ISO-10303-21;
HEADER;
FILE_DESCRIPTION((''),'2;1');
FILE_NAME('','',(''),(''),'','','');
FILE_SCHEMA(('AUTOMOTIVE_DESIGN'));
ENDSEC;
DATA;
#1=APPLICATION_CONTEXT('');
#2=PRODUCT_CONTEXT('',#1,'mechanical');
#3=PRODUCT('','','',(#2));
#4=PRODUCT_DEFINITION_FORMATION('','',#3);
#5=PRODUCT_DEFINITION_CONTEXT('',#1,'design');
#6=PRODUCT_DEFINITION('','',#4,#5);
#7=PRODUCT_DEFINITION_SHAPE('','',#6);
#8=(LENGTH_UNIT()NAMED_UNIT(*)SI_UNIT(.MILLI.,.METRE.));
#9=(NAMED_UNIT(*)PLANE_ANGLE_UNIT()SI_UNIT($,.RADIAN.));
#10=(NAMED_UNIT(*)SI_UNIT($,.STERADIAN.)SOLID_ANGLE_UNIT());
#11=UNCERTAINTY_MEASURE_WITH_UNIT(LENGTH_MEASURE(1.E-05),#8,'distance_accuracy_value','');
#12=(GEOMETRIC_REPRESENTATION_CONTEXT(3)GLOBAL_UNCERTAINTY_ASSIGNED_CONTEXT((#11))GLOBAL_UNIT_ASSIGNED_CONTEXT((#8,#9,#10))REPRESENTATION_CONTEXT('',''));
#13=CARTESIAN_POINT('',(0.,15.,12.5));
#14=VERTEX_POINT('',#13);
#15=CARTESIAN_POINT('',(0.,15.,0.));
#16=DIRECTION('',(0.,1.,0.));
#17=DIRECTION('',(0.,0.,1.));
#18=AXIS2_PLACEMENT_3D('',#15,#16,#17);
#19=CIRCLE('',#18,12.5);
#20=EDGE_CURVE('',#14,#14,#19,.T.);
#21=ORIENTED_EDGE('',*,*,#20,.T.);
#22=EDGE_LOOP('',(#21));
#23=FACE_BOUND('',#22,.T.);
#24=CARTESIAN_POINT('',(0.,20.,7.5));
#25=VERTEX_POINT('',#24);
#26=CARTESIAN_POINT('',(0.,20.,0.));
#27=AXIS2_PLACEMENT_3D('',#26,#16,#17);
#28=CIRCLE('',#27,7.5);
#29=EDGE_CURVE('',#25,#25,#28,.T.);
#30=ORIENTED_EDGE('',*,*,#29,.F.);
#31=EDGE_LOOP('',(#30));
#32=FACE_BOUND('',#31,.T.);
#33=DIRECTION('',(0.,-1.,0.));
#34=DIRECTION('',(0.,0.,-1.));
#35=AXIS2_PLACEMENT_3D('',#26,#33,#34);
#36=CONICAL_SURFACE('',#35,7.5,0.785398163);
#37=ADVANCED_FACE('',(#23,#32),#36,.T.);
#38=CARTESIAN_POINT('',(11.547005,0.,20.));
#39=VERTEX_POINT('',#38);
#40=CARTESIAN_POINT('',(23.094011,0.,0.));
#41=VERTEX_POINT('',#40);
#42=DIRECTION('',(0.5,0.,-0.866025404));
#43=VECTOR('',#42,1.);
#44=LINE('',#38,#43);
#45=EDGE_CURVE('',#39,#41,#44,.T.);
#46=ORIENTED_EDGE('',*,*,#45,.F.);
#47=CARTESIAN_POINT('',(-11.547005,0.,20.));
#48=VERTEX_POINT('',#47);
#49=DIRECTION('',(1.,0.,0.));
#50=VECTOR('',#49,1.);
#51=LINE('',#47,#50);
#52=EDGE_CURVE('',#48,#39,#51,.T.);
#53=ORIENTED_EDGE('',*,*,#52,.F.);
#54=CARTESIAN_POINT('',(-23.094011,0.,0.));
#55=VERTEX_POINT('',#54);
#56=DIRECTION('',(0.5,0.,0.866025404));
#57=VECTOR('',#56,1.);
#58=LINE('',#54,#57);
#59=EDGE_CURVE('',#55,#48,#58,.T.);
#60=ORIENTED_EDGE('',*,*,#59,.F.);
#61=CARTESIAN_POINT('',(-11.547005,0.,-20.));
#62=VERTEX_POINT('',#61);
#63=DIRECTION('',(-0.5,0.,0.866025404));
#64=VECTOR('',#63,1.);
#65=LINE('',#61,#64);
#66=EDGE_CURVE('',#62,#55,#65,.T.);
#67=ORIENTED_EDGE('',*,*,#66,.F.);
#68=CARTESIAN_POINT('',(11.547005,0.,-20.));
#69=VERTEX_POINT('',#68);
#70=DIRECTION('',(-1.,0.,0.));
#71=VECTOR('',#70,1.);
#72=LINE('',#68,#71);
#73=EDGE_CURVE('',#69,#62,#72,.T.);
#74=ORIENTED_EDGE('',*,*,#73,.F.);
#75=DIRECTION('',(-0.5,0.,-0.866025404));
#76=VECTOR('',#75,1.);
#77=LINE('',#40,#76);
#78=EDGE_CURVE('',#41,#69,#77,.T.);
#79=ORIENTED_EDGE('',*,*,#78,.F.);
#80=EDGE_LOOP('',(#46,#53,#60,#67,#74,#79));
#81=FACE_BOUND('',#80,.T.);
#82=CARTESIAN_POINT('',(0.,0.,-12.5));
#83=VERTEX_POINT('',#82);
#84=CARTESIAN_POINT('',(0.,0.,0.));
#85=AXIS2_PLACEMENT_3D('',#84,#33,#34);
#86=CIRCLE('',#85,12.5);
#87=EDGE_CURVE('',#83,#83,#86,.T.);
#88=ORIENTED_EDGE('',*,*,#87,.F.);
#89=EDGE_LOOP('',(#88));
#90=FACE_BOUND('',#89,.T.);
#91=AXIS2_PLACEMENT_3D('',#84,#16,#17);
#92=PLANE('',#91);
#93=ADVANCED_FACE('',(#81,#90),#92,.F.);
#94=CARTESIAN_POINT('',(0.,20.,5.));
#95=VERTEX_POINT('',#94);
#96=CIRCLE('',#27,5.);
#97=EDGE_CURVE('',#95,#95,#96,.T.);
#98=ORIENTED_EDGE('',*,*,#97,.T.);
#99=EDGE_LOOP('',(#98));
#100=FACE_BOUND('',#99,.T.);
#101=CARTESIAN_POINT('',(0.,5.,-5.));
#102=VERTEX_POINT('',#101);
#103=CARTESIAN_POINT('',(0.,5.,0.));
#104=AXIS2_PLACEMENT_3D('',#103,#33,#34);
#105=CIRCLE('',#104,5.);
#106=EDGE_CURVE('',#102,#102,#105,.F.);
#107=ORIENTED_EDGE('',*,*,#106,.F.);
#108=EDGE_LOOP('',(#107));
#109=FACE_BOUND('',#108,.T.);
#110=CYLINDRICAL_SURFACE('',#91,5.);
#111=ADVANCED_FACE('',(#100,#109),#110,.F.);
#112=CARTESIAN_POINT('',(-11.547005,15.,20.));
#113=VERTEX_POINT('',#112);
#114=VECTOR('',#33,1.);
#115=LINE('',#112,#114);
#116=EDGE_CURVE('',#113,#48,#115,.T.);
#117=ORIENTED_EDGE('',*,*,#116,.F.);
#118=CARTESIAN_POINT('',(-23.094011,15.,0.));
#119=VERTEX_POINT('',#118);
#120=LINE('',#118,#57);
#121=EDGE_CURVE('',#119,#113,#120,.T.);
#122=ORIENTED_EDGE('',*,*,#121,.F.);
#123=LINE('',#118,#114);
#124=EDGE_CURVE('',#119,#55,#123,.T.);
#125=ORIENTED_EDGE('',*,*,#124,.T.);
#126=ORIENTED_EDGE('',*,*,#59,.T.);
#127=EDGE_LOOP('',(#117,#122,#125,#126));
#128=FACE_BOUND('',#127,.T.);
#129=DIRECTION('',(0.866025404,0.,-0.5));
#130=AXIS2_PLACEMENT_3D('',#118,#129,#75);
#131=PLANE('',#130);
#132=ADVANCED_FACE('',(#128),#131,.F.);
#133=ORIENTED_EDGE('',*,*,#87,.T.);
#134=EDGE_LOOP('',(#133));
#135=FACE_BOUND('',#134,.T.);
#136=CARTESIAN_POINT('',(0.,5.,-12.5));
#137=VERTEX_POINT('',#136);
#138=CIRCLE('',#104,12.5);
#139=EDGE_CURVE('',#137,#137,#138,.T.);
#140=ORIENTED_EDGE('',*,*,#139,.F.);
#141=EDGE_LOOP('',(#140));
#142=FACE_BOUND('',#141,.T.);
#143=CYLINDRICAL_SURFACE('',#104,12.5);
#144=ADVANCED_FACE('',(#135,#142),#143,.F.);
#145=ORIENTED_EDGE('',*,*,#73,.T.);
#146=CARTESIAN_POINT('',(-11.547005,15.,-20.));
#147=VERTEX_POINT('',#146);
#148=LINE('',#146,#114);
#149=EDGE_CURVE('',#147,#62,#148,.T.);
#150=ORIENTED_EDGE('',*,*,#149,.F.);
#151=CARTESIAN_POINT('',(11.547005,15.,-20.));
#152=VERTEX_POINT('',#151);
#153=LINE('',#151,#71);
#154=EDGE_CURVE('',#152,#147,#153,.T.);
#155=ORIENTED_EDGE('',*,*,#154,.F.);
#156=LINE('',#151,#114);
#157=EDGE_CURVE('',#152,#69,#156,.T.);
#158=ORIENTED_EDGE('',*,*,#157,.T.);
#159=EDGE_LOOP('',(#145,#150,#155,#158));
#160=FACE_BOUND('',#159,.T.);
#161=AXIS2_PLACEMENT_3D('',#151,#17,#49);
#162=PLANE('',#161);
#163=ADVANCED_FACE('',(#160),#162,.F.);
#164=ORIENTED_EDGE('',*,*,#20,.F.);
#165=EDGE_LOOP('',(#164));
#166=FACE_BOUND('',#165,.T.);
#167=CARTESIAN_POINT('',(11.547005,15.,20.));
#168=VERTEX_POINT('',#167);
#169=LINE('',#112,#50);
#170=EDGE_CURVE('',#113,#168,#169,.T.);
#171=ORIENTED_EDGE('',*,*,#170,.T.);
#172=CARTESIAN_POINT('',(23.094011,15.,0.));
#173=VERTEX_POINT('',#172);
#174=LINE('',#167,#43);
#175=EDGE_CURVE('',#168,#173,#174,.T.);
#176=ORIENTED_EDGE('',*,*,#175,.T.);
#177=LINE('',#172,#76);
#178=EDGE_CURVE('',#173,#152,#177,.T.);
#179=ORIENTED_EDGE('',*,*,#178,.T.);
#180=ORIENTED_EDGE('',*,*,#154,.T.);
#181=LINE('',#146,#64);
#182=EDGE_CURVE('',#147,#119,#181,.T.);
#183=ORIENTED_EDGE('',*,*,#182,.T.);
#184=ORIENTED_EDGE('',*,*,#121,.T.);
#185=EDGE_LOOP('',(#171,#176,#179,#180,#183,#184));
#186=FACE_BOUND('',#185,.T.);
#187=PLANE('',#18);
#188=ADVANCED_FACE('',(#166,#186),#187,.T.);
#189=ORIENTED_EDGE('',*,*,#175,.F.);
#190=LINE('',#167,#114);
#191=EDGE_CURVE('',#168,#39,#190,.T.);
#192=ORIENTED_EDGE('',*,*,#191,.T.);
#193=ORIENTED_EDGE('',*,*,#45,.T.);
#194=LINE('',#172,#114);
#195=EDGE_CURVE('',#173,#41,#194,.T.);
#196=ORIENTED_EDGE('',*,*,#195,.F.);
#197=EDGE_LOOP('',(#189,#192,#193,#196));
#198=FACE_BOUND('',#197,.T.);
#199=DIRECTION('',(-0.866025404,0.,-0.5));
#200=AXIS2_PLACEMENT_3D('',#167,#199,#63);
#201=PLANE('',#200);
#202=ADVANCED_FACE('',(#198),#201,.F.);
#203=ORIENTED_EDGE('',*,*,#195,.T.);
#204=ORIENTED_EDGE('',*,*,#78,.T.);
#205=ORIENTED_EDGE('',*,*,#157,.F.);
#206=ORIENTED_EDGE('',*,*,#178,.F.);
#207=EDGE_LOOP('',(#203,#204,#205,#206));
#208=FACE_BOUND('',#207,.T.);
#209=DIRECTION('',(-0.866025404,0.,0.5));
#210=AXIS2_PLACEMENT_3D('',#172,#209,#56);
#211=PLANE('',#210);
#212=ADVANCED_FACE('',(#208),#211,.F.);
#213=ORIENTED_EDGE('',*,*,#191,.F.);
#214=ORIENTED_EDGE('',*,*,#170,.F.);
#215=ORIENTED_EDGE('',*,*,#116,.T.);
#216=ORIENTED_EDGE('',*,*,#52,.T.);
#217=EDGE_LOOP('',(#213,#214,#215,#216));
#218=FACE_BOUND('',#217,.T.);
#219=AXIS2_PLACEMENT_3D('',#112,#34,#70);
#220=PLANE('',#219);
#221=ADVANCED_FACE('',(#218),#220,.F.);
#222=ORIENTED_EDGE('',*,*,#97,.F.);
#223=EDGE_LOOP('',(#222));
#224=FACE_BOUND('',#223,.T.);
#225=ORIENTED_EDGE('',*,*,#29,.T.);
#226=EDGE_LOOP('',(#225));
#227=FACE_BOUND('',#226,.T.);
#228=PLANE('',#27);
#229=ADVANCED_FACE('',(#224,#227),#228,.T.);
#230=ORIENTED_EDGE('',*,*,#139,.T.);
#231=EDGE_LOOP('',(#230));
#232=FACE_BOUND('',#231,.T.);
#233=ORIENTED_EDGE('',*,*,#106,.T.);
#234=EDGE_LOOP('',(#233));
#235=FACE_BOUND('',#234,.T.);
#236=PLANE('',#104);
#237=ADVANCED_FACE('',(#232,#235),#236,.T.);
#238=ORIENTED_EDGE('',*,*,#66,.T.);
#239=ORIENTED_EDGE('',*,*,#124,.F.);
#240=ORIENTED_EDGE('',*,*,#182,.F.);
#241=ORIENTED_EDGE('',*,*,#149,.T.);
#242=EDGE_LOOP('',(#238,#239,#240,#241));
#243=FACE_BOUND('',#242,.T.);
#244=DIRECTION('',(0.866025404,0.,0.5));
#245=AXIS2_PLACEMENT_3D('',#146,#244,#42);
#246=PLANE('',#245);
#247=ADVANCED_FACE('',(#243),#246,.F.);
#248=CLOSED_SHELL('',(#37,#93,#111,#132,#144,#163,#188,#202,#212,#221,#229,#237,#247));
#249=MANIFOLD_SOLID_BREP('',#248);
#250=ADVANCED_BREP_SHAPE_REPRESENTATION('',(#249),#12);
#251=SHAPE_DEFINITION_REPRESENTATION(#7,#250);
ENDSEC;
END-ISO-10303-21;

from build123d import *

# Parameters (mm, degrees)
BOSS_EXTRUDE1_DEPTH = 15
SKETCH2_R           = 12.5
BOSS_EXTRUDE2_DEPTH = 5
SKETCH3_R           = 5
CUT_EXTRUDE1_DEPTH  = 37.514837167
CHAMFER1_SIZE       = 5
SKETCH4_R           = 12.5
CUT_EXTRUDE2_DEPTH  = 5


with BuildPart() as part:
    # Sketch1 → Boss-Extrude1 (new body)
    with BuildSketch(Plane(origin=(0, 0, 0), x_dir=(1, 0, 0), z_dir=(0, 1, 0))):
        Polygon((11.547005384, 20), (-11.547005384, 20), (-23.094010768, 0), (-11.547005384, -20), (11.547005384, -20), (23.094010768, 0), align=None)
    extrude(amount=BOSS_EXTRUDE1_DEPTH)

    # Sketch2 → Boss-Extrude2 (add)
    with BuildSketch(Plane(origin=(0, 15, 0), x_dir=(1, 0, 0), z_dir=(0, 1, 0))):
        with Locations(Location((0, 0, 0), (0, 0, 270))):
            Circle(SKETCH2_R)
    extrude(amount=BOSS_EXTRUDE2_DEPTH)

    # Sketch3 → Cut-Extrude1 (cut, through all)
    with BuildSketch(Plane(origin=(0, 20, 0), x_dir=(1, 0, 0), z_dir=(0, 1, 0))):
        with Locations(Location((0, 0, 0), (0, 0, 270))):
            Circle(SKETCH3_R)
    extrude(amount=-CUT_EXTRUDE1_DEPTH, mode=Mode.SUBTRACT)

    # Chamfer1
    chamfer1_edges = [part.edges().sort_by_distance(p)[0] for p in [
        (0, 20, -12.5),
    ]]
    chamfer(chamfer1_edges, length=CHAMFER1_SIZE - 0.0001)  # a hair under: the kernel refuses the full size

    # Sketch4 → Cut-Extrude2 (cut)
    with BuildSketch(Plane.XZ):
        with Locations(Location((0, 0, 0), (0, 0, 270))):
            Circle(SKETCH4_R)
    extrude(amount=-CUT_EXTRUDE2_DEPTH, mode=Mode.SUBTRACT)


solid = part.part
